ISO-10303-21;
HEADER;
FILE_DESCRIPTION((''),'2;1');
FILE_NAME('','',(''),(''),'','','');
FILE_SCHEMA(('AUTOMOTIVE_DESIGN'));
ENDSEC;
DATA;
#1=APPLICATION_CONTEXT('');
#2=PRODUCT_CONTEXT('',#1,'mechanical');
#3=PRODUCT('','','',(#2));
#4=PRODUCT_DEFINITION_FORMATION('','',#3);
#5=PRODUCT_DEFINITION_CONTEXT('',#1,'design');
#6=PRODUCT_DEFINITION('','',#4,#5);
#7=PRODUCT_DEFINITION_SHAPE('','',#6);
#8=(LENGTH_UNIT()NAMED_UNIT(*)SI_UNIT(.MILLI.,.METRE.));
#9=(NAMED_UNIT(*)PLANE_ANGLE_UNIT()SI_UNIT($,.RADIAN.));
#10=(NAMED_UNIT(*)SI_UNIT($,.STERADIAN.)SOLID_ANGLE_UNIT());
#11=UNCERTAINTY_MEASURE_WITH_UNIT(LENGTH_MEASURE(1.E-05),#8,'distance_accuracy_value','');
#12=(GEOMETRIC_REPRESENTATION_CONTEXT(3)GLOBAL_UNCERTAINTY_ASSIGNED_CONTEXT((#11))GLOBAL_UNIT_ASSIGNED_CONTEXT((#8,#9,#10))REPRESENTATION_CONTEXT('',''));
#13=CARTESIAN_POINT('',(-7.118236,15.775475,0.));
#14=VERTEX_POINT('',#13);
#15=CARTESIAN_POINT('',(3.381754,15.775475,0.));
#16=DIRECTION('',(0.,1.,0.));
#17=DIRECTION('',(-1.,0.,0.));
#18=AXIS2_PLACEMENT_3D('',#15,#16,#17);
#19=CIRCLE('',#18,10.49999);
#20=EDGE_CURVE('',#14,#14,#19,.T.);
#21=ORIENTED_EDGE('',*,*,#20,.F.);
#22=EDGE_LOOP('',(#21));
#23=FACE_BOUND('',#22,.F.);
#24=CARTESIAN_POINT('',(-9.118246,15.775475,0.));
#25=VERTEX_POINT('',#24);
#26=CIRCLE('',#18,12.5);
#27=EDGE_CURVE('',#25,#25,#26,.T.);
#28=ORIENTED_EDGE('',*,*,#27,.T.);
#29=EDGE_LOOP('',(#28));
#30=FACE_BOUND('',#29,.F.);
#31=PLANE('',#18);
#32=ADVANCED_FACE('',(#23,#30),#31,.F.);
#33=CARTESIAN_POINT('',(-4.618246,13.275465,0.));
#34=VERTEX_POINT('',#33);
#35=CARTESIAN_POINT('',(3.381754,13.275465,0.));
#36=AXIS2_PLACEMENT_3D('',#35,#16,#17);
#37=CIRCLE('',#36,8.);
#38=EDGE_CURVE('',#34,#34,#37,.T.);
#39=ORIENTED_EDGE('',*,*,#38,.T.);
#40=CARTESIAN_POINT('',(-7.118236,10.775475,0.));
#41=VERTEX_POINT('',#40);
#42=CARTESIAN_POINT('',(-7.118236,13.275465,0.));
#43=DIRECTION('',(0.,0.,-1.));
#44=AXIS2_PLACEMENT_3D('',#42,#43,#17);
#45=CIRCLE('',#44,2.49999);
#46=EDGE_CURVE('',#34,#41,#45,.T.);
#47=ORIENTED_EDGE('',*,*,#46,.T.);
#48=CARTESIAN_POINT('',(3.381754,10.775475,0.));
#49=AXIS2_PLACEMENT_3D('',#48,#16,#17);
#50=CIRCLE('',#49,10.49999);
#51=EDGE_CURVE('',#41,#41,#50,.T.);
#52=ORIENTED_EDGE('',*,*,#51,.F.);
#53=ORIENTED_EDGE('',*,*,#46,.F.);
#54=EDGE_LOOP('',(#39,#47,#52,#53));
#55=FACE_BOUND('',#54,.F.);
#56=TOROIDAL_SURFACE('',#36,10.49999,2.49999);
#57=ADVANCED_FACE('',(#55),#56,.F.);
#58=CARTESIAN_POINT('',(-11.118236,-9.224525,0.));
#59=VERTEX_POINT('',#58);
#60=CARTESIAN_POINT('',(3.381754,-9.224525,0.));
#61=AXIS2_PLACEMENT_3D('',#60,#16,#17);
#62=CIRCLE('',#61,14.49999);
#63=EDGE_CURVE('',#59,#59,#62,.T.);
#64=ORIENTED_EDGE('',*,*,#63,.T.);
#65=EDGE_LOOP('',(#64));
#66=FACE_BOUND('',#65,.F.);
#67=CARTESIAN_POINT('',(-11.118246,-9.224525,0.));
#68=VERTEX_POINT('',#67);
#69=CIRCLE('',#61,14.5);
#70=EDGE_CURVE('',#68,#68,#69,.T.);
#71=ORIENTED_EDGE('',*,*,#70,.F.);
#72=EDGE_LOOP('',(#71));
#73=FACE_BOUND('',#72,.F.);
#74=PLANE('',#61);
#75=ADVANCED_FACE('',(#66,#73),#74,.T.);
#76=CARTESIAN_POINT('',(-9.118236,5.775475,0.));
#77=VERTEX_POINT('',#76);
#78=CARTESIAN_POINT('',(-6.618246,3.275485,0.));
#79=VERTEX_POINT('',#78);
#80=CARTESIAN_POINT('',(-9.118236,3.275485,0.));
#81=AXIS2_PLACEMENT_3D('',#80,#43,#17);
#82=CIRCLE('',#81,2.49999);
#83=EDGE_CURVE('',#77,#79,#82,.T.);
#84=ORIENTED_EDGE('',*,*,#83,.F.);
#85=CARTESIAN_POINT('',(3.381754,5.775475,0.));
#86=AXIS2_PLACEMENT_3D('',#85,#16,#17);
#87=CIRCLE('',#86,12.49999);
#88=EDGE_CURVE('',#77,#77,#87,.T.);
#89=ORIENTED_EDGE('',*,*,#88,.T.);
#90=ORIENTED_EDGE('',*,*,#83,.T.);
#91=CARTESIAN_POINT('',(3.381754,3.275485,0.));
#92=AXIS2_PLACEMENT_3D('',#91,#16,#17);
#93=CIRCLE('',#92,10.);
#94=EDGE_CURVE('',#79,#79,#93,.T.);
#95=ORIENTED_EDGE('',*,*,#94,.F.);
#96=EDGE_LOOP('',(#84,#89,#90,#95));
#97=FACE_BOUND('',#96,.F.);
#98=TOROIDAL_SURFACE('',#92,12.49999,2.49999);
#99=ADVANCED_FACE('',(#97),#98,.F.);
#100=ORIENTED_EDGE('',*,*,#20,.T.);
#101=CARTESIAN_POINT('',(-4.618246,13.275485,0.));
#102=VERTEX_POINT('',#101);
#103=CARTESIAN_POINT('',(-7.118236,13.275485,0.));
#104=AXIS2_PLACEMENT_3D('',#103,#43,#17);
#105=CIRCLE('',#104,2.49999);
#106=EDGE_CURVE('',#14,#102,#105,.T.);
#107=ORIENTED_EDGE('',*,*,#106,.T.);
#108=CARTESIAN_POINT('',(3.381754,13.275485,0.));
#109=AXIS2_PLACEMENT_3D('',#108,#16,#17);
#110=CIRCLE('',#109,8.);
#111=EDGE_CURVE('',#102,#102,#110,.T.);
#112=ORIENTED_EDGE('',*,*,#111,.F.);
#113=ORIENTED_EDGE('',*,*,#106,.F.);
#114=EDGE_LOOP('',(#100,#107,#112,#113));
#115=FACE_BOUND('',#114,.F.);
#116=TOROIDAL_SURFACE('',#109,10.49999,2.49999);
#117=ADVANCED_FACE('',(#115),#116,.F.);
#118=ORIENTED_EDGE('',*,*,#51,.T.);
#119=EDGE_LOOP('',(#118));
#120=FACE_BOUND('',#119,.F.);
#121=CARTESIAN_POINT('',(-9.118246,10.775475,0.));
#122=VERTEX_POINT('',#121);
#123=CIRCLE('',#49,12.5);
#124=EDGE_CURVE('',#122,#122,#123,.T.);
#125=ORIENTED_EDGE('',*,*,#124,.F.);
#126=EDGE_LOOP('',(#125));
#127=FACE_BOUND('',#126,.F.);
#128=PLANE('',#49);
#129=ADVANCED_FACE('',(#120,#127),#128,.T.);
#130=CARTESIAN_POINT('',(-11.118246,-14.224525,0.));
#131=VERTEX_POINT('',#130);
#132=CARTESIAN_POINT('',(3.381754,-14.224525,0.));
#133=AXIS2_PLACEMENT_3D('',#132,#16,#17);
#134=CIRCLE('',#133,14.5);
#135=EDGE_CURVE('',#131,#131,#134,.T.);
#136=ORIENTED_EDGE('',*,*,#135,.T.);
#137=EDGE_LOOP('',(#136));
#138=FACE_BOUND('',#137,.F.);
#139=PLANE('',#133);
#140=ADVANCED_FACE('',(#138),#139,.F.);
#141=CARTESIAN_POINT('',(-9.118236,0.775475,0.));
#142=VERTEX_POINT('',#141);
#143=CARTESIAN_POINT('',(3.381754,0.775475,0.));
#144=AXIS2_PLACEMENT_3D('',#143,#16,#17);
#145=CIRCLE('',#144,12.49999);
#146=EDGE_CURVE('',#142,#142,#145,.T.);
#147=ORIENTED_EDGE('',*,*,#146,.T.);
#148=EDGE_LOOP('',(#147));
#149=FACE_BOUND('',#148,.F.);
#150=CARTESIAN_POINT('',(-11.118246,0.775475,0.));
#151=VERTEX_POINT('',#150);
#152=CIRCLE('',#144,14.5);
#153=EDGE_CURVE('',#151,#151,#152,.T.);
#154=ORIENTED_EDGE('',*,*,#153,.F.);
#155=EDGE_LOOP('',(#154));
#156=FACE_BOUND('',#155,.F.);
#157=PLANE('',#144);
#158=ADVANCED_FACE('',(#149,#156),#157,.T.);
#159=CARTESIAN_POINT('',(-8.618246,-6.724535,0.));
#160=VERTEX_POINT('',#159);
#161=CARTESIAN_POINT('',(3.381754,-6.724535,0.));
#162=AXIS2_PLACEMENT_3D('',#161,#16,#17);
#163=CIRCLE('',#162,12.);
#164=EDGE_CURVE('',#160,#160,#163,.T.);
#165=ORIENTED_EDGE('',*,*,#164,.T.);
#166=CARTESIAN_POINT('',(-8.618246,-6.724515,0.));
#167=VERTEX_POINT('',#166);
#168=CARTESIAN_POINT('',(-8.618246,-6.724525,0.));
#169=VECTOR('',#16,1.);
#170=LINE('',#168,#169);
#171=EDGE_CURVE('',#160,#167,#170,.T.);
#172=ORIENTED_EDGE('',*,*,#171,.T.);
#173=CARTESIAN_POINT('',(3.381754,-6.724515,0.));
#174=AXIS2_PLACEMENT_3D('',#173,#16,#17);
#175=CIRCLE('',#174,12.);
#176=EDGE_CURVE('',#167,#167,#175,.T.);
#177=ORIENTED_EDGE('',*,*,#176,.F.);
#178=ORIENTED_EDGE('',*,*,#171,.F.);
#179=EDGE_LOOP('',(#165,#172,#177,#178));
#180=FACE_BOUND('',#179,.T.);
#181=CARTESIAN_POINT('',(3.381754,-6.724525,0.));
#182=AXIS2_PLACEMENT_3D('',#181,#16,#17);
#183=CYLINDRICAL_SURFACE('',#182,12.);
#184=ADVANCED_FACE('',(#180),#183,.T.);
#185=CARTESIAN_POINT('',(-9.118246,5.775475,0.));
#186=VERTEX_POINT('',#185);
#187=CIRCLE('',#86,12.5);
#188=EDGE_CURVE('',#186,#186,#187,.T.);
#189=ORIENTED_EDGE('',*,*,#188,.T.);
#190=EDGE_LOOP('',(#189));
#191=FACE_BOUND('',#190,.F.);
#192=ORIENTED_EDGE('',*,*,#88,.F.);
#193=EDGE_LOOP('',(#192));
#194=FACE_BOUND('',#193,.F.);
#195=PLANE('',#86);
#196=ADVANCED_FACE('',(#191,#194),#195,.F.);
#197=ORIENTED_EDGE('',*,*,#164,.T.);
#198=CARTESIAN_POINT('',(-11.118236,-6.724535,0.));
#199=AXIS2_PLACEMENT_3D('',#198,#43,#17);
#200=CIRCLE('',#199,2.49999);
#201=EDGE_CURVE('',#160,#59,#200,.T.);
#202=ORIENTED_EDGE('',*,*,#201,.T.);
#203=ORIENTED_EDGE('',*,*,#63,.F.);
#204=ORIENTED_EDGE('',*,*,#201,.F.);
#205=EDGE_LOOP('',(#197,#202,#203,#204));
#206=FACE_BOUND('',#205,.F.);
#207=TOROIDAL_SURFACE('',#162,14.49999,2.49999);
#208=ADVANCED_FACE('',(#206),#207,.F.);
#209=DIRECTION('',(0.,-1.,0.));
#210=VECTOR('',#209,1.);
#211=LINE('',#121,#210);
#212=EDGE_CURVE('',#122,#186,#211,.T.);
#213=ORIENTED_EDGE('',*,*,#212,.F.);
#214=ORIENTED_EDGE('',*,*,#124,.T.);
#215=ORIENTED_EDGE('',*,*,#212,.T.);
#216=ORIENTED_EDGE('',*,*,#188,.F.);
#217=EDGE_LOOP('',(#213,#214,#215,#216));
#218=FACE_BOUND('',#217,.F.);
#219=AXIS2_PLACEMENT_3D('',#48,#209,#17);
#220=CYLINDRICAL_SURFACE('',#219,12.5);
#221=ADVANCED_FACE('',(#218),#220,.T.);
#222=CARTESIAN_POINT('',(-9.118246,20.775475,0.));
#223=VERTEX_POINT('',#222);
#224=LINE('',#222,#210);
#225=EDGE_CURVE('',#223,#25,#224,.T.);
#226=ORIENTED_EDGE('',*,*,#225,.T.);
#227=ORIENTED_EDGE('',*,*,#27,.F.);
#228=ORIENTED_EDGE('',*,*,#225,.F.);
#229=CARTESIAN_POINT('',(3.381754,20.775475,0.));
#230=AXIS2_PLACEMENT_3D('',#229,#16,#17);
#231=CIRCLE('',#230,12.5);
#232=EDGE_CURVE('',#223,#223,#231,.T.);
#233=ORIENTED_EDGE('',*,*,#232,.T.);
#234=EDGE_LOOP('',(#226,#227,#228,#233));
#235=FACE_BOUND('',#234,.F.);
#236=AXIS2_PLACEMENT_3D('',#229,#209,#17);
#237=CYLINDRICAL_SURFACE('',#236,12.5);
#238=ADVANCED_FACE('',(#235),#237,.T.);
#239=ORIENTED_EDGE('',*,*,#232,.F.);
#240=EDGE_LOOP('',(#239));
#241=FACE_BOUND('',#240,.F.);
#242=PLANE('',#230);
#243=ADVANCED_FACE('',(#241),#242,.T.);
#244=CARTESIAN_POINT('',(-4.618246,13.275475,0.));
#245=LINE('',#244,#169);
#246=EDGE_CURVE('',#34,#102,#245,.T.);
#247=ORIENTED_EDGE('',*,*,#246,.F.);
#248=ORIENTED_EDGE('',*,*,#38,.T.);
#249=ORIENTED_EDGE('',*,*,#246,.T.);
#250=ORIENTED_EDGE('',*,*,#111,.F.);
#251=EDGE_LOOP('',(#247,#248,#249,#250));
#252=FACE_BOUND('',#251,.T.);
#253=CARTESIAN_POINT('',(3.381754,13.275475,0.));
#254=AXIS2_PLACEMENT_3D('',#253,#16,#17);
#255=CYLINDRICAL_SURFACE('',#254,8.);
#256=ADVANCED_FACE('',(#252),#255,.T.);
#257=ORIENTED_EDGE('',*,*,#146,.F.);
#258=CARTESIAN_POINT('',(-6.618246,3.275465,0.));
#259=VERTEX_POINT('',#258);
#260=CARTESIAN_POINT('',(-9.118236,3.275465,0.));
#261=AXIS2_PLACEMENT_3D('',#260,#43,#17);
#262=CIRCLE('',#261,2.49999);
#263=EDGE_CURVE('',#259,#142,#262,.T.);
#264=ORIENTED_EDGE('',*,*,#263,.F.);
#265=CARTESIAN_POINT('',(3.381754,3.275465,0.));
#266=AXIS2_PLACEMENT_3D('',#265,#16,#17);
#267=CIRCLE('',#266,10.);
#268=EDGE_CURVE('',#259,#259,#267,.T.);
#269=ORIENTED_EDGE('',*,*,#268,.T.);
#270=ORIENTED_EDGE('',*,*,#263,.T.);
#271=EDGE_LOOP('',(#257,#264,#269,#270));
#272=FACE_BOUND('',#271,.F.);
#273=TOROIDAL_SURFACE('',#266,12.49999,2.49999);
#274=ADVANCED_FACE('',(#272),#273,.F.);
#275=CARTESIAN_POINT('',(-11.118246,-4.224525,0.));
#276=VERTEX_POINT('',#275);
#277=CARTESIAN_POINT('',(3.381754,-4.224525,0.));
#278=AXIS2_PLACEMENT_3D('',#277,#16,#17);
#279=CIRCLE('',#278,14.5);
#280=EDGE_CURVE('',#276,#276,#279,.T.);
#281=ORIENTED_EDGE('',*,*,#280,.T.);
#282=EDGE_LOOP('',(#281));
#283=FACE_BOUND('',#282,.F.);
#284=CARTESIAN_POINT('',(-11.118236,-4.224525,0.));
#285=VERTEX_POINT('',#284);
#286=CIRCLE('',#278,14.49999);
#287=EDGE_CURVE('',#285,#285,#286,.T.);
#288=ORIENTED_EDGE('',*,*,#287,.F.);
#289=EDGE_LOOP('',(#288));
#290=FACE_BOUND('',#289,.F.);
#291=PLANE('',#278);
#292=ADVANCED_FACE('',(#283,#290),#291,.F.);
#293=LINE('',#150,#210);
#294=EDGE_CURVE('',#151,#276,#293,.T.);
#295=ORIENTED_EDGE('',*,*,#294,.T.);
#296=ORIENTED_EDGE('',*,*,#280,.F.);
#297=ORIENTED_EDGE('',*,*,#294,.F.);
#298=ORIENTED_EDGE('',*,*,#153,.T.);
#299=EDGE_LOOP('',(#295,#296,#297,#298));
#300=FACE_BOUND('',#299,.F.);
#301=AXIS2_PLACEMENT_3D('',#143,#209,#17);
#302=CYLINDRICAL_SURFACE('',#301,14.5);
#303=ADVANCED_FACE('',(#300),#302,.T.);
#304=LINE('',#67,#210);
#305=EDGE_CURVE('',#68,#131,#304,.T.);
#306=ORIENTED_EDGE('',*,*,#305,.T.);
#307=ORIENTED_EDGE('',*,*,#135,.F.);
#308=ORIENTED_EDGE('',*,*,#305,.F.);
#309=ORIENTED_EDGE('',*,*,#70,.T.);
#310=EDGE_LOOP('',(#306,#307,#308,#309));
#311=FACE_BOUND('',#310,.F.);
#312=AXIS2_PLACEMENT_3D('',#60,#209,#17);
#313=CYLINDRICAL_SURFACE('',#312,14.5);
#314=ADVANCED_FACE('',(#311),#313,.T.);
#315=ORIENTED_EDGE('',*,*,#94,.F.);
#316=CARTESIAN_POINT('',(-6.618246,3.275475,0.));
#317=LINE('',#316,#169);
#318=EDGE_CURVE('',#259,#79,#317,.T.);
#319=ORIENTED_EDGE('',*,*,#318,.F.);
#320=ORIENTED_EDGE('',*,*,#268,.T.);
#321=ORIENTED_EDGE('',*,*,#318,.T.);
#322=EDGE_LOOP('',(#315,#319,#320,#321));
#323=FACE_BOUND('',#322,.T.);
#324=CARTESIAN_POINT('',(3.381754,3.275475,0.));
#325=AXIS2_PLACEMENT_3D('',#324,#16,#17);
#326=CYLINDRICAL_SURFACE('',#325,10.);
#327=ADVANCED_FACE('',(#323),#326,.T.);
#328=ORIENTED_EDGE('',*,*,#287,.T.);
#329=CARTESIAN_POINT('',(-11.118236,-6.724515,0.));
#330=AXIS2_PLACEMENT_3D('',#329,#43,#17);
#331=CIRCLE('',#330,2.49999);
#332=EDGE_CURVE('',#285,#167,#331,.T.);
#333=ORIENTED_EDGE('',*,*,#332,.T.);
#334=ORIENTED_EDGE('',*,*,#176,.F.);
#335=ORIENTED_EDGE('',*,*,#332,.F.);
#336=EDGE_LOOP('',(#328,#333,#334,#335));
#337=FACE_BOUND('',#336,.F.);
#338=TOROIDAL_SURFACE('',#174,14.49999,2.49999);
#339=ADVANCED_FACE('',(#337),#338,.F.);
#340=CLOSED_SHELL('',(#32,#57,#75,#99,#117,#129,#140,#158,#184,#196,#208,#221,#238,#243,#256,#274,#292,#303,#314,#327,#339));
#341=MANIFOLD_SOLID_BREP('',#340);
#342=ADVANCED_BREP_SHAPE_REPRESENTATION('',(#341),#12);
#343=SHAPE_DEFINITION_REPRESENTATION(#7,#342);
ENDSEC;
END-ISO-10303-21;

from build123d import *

# Parameters (mm, degrees)
F0_W   = 12
F0_H   = 5
F0_W_2 = 10
F0_W_3 = 8
F2_R   = 2.49999


# Not quite as in the source:
# - a fillet or chamfer is up to 0.001 mm smaller than in the source, because OpenCascade refuses the exact size


with BuildPart() as f1:
    # F0 (on Top) → F1 (revolve)
    with BuildSketch(Plane.XY):
        Polygon((-11.1182456035, -9.2245248563), (-11.1182456035, -14.2245248563), (3.3817543965, -14.2245248563), (3.3817543965, -9.2245248563), (-8.6182456035, -9.2245248563), align=None)
        with Locations((-2.6182456035, -6.7245248563)):
            Rectangle(F0_W, F0_H)
        Polygon((-8.6182456035, -4.2245248563), (3.3817543965, -4.2245248563), (3.3817543965, 0.7754751437), (-6.6182456035, 0.7754751437), (-11.1182456035, 0.7754751437), (-11.1182456035, -4.2245248563), align=None)
        with Locations((-1.6182456035, 3.2754751437)):
            Rectangle(F0_W_2, F0_H)
        Polygon((-6.6182456035, 5.7754751437), (3.3817543965, 5.7754751437), (3.3817543965, 10.7754751437), (-4.6182456035, 10.7754751437), (-9.1182456035, 10.7754751437), (-9.1182456035, 5.7754751437), align=None)
        with Locations((-0.6182456035, 13.2754751437)):
            Rectangle(F0_W_3, F0_H)
        Polygon((-4.6182456035, 15.7754751437), (3.3817543965, 15.7754751437), (3.3817543965, 20.7754751437), (-9.1182456035, 20.7754751437), (-9.1182456035, 15.7754751437), align=None)
    revolve(axis=Axis((3.3817543965, 3.2754751437, 0), (0, 1, 0)))

    # F2 (radius 2.5 in the source; OpenCascade refuses exactly that, so slightly less here)
    f2_edges = [f1.edges().sort_by_distance(p)[0] for p in [
        (11.381754, 15.775475, 0),
        (11.381754, 10.775475, 0),
        (13.381754, 5.775475, 0),
        (13.381754, 0.775475, 0),
        (15.381754, -4.224525, 0),
        (15.381754, -9.224525, 0),
    ]]
    fillet(f2_edges, radius=F2_R)


solid = f1.part
